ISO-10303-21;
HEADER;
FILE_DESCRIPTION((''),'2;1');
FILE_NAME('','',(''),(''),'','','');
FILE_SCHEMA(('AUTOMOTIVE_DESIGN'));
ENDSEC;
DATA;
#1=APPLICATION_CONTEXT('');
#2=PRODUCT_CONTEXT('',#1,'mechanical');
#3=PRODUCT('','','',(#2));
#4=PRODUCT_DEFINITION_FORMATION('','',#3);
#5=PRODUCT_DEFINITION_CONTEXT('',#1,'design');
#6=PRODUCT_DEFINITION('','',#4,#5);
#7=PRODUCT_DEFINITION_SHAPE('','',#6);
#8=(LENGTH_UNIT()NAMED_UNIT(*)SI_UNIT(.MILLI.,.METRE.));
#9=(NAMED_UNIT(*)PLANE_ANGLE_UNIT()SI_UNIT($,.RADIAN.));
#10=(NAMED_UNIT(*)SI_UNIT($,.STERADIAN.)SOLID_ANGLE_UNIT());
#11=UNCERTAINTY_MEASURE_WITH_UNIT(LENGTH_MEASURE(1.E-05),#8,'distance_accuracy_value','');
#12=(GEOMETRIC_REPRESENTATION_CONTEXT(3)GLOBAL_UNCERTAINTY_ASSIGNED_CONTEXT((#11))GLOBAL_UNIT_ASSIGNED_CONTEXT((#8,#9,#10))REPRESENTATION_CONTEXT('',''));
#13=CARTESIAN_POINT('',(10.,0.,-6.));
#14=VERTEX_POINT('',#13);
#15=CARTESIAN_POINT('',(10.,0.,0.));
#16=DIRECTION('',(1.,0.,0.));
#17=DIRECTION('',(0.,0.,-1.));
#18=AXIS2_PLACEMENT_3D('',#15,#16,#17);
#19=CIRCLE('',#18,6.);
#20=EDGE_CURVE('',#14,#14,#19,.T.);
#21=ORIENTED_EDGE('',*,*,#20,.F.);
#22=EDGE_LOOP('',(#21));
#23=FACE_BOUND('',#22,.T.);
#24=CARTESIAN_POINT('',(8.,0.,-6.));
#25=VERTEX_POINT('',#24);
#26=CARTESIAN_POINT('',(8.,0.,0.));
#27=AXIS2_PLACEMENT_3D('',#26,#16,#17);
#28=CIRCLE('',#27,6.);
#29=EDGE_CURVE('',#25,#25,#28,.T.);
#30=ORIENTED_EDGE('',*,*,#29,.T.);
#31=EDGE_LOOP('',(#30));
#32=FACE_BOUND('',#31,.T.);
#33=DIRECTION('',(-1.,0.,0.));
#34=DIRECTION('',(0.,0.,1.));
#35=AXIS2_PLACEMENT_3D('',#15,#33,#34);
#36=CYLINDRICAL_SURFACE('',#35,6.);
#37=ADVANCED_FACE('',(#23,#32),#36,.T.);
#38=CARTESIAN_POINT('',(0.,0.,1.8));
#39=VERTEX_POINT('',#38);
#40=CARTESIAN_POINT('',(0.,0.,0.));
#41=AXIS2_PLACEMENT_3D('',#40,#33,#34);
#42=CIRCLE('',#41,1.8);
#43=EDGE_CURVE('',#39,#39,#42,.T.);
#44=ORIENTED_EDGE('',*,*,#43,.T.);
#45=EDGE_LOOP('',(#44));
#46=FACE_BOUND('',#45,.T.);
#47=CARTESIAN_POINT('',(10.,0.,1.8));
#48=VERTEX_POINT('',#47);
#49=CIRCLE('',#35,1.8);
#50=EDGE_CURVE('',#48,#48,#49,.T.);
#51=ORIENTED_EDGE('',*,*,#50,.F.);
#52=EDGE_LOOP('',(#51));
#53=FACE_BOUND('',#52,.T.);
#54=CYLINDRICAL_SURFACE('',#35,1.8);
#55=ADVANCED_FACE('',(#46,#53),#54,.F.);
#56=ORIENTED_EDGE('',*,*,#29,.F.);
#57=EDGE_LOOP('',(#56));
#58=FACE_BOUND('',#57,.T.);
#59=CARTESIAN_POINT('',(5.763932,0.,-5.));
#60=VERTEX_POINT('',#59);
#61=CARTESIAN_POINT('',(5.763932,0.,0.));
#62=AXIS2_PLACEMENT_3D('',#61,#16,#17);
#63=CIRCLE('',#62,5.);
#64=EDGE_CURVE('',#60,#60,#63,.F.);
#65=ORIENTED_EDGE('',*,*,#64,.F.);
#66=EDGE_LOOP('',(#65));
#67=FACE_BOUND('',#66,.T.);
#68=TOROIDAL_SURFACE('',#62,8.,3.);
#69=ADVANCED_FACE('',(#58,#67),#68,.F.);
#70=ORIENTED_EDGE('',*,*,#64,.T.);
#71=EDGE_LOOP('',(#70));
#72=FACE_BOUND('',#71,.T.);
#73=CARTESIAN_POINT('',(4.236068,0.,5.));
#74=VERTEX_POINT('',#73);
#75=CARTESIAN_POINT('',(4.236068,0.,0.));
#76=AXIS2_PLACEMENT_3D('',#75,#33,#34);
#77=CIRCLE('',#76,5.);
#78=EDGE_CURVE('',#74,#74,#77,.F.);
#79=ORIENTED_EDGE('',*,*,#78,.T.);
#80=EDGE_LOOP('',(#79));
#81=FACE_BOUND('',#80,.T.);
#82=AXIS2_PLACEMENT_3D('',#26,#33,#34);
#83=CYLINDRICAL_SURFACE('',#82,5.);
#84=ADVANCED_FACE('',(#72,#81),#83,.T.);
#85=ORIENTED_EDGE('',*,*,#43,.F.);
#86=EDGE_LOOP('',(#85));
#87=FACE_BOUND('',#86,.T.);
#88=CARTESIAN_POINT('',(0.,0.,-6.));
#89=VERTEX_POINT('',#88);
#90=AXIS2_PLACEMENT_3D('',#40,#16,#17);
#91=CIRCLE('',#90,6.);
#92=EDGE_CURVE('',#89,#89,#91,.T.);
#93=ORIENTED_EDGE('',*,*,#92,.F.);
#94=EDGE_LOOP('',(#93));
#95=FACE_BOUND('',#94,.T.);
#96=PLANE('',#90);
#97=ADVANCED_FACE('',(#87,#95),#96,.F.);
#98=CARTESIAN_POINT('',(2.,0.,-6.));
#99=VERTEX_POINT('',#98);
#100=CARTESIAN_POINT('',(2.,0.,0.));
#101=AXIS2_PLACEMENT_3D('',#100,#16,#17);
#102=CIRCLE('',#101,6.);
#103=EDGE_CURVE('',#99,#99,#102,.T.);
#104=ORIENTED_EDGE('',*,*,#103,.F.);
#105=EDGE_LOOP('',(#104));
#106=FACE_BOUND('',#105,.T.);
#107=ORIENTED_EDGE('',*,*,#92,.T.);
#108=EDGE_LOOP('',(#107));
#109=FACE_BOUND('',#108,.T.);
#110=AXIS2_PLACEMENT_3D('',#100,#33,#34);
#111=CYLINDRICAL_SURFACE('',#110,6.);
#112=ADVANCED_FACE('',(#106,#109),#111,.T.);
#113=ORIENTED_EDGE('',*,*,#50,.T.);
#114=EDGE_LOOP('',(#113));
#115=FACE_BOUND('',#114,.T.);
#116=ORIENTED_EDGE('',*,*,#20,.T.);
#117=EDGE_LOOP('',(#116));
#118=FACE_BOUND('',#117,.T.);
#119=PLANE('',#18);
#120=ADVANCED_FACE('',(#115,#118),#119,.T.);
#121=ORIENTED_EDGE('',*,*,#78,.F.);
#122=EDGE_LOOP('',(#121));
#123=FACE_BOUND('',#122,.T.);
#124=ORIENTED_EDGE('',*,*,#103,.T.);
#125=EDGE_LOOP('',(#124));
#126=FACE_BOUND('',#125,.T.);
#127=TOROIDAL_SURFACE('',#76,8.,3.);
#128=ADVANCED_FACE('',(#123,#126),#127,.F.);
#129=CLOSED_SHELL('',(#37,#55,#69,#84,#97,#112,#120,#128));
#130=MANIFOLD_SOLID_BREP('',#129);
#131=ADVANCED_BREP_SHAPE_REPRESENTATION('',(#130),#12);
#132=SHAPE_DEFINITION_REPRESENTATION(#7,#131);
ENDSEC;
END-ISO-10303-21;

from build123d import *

# Parameters (mm, degrees)
SKETCH1_R           = 6
BOSS_EXTRUDE1_DEPTH = 2
SKETCH2_R           = 5
BOSS_EXTRUDE2_DEPTH = 6
SKETCH3_R           = 6
BOSS_EXTRUDE3_DEPTH = 2
FILLET1_R           = 3
SKETCH4_R           = 1.8
CUT_EXTRUDE1_DEPTH  = 14.114877049


with BuildPart() as part:
    # Sketch1 → Boss-Extrude1 (new body)
    with BuildSketch(Plane(origin=(0, 0, 0), x_dir=(0, 0, -1), z_dir=(1, 0, 0))):
        Circle(SKETCH1_R)
    extrude(amount=BOSS_EXTRUDE1_DEPTH)

    # Sketch2 → Boss-Extrude2 (add)
    with BuildSketch(Plane(origin=(2, 0, 0), x_dir=(0, 0, -1), z_dir=(1, 0, 0))):
        Circle(SKETCH2_R)
    extrude(amount=BOSS_EXTRUDE2_DEPTH)

    # Sketch3 → Boss-Extrude3 (add)
    with BuildSketch(Plane(origin=(8, 0, 0), x_dir=(0, 0, -1), z_dir=(1, 0, 0))):
        Circle(SKETCH3_R)
    extrude(amount=BOSS_EXTRUDE3_DEPTH)

    # Fillet1
    # the kernel refuses this fillet: 3 mm, written as the material it adds along each edge
    with BuildSketch(Plane(origin=(2, 0, 0), x_dir=(0, 0, -1), z_dir=(0, -1, 0))) as fillet1_piece_1:
        with BuildLine():
            CenterArc((8, 2.236067977), FILLET1_R, 180, 48.189685104)
            Line((6, 0), (5.96, -0.04472136))
            ThreePointArc((5.96, -0.04472136), (5.5, -0.06), (5, -0.06))
            Line((5, -0.06), (4.94, 0))
            Line((4.94, 0), (4.94, 2.236067977))
            Line((4.94, 2.236067977), (5, 2.236067977))
        make_face()
    revolve(axis=Axis((2, 0, 0), (1, 0, 0)))
    with BuildSketch(Plane(origin=(8, 0, 0), x_dir=(0, 0, -1), z_dir=(0, -1, 0))) as fillet1_piece_2:
        with BuildLine():
            CenterArc((8, -2.236067977), FILLET1_R, 131.810314896, 48.189685104)
            Line((5, -2.236067977), (4.94, -2.236067977))
            Line((4.94, -2.236067977), (4.94, 0))
            Line((4.94, 0), (5, 0.06))
            ThreePointArc((5, 0.06), (5.5, 0.06), (5.96, 0.04472136))
            Line((5.96, 0.04472136), (6, 0))
        make_face()
    revolve(axis=Axis((8, 0, 0), (1, 0, 0)))

    # Sketch4 → Cut-Extrude1 (cut, through all)
    with BuildSketch(Plane.ZY):
        Circle(SKETCH4_R)
    extrude(amount=-CUT_EXTRUDE1_DEPTH, mode=Mode.SUBTRACT)


solid = part.part
